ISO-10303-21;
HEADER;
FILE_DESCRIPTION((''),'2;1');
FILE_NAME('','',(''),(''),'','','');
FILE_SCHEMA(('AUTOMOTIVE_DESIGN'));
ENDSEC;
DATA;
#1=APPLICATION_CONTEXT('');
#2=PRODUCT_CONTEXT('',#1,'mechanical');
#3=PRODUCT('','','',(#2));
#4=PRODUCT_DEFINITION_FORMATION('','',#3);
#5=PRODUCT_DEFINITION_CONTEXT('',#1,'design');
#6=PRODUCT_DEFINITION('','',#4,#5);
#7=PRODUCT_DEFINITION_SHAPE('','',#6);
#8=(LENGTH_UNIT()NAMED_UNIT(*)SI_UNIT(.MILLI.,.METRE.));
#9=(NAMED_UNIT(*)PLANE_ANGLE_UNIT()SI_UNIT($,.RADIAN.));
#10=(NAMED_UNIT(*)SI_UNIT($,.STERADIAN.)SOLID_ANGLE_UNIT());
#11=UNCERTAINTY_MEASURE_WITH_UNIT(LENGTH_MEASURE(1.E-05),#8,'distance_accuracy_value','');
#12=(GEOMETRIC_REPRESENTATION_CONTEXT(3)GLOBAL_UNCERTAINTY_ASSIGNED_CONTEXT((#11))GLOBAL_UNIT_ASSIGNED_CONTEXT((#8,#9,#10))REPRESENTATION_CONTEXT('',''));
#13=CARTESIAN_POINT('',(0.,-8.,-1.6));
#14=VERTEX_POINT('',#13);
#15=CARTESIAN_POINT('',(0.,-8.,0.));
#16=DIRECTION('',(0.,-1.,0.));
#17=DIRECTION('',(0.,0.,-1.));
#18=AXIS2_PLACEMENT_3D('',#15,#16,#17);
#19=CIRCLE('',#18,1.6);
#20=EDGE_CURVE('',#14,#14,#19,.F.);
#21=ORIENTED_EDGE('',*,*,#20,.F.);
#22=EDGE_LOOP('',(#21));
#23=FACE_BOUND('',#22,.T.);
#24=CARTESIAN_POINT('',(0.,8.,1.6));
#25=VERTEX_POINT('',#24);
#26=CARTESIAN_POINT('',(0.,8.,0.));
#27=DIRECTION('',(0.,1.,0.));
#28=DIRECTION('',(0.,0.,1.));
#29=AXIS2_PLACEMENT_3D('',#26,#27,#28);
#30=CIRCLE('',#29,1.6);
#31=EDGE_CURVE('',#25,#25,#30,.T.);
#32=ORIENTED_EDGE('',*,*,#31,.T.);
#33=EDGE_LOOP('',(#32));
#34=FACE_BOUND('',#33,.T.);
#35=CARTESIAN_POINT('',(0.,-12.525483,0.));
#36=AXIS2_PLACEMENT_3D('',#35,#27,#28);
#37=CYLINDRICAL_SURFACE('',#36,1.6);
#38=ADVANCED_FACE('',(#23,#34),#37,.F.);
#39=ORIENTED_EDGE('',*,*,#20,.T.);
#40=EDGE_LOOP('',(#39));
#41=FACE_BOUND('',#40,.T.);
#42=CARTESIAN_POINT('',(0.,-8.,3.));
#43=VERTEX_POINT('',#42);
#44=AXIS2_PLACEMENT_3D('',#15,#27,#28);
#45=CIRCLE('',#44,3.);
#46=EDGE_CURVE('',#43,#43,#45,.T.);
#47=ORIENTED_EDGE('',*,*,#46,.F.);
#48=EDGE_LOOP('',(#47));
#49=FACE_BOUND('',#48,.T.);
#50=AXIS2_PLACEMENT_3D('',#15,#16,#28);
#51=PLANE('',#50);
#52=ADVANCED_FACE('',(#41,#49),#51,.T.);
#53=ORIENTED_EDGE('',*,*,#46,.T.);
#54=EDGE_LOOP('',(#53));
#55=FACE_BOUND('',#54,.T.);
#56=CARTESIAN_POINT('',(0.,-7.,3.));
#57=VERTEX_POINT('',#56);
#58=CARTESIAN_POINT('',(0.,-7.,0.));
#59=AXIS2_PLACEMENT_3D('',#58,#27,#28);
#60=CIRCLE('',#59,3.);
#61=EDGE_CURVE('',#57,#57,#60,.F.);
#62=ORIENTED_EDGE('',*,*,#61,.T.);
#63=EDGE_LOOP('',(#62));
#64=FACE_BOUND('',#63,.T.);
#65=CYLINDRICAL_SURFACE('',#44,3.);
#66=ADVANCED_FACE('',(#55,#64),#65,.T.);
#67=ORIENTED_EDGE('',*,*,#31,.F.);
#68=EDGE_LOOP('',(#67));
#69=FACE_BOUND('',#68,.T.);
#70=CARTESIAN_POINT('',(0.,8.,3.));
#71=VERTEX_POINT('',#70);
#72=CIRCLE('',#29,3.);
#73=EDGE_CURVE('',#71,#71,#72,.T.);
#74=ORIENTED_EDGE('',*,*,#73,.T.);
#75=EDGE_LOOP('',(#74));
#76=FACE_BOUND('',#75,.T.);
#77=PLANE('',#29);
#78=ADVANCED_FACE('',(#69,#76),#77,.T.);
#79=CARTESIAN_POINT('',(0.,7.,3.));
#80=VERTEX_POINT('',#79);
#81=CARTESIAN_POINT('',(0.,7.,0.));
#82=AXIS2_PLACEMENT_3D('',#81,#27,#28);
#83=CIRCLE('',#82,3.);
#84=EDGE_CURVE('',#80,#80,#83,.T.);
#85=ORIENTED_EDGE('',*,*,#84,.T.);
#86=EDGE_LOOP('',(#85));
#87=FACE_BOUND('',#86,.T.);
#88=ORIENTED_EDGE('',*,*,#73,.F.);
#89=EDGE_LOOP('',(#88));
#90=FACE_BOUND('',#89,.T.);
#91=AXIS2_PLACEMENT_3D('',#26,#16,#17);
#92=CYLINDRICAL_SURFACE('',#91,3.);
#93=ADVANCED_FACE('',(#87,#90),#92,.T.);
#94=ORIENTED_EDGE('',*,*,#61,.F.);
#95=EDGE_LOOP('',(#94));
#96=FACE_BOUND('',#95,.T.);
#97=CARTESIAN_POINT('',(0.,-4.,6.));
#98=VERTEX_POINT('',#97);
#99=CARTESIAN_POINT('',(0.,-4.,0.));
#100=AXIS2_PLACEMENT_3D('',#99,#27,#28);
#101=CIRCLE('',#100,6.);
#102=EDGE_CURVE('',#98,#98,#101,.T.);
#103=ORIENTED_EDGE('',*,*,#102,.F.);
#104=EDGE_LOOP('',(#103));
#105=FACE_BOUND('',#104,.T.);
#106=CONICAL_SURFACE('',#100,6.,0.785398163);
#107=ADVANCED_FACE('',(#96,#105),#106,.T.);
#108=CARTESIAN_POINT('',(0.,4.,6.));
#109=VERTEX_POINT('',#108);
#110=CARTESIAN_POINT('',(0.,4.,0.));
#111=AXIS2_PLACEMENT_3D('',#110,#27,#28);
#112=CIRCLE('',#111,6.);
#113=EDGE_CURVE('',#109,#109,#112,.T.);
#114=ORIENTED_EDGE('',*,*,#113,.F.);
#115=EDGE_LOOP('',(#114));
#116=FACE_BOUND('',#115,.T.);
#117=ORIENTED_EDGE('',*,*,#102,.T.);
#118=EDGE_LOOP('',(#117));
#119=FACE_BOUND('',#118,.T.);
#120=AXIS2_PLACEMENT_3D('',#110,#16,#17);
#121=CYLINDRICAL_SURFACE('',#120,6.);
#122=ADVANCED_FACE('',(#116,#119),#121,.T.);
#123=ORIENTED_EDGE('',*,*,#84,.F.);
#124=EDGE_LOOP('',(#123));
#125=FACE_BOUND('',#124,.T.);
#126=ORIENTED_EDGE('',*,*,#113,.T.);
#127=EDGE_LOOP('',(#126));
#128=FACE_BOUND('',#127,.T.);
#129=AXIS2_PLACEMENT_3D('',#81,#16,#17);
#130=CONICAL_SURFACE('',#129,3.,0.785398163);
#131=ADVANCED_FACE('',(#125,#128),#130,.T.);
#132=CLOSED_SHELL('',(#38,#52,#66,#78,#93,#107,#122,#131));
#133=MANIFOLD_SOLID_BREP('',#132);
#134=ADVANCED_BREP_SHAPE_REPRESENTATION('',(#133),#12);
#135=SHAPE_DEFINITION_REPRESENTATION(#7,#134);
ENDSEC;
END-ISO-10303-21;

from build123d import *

# Parameters (mm, degrees)
SKETCH1_R           = 6
BOSS_EXTRUDE1_DEPTH = 4
SKETCH2_R           = 3
BOSS_EXTRUDE2_DEPTH = 4
SKETCH3_R           = 1.6
CUT_EXTRUDE1_DEPTH  = 16
CHAMFER1_SIZE       = 3


with BuildPart() as part:
    # Sketch1 → Boss-Extrude1 (new, symmetric)
    with BuildSketch(Plane(origin=(0, 0, 0), x_dir=(1, 0, 0), z_dir=(0, 1, 0))):
        with Locations(Location((0, 0, 0), (0, 0, 270))):
            Circle(SKETCH1_R)
    extrude(amount=BOSS_EXTRUDE1_DEPTH, both=True)

    # Sketch2 → Boss-Extrude2 (add)
    with BuildSketch(Plane(origin=(0, 4, 0), x_dir=(1, 0, 0), z_dir=(0, 1, 0))):
        with Locations(Location((0, 0, 0), (0, 0, 270))):
            Circle(SKETCH2_R)
    boss_extrude2 = extrude(amount=BOSS_EXTRUDE2_DEPTH)

    # Mirror1: Boss-Extrude2 across plane
    add(boss_extrude2.mirror(Plane.ZX))

    # Sketch3 → Cut-Extrude1 (cut)
    with BuildSketch(Plane(origin=(0, 8, 0), x_dir=(1, 0, 0), z_dir=(0, 1, 0))):
        with Locations(Location((0, 0, 0), (0, 0, 270))):
            Circle(SKETCH3_R)
    extrude(amount=-CUT_EXTRUDE1_DEPTH, mode=Mode.SUBTRACT)

    # Chamfer1
    chamfer1_edges = [part.edges().sort_by_distance(p)[0] for p in [
        (0, -4, -3),
        (0, 4, -3),
    ]]
    chamfer(chamfer1_edges, length=CHAMFER1_SIZE - 0.0001)  # a hair under: the kernel refuses the full size


solid = part.part
